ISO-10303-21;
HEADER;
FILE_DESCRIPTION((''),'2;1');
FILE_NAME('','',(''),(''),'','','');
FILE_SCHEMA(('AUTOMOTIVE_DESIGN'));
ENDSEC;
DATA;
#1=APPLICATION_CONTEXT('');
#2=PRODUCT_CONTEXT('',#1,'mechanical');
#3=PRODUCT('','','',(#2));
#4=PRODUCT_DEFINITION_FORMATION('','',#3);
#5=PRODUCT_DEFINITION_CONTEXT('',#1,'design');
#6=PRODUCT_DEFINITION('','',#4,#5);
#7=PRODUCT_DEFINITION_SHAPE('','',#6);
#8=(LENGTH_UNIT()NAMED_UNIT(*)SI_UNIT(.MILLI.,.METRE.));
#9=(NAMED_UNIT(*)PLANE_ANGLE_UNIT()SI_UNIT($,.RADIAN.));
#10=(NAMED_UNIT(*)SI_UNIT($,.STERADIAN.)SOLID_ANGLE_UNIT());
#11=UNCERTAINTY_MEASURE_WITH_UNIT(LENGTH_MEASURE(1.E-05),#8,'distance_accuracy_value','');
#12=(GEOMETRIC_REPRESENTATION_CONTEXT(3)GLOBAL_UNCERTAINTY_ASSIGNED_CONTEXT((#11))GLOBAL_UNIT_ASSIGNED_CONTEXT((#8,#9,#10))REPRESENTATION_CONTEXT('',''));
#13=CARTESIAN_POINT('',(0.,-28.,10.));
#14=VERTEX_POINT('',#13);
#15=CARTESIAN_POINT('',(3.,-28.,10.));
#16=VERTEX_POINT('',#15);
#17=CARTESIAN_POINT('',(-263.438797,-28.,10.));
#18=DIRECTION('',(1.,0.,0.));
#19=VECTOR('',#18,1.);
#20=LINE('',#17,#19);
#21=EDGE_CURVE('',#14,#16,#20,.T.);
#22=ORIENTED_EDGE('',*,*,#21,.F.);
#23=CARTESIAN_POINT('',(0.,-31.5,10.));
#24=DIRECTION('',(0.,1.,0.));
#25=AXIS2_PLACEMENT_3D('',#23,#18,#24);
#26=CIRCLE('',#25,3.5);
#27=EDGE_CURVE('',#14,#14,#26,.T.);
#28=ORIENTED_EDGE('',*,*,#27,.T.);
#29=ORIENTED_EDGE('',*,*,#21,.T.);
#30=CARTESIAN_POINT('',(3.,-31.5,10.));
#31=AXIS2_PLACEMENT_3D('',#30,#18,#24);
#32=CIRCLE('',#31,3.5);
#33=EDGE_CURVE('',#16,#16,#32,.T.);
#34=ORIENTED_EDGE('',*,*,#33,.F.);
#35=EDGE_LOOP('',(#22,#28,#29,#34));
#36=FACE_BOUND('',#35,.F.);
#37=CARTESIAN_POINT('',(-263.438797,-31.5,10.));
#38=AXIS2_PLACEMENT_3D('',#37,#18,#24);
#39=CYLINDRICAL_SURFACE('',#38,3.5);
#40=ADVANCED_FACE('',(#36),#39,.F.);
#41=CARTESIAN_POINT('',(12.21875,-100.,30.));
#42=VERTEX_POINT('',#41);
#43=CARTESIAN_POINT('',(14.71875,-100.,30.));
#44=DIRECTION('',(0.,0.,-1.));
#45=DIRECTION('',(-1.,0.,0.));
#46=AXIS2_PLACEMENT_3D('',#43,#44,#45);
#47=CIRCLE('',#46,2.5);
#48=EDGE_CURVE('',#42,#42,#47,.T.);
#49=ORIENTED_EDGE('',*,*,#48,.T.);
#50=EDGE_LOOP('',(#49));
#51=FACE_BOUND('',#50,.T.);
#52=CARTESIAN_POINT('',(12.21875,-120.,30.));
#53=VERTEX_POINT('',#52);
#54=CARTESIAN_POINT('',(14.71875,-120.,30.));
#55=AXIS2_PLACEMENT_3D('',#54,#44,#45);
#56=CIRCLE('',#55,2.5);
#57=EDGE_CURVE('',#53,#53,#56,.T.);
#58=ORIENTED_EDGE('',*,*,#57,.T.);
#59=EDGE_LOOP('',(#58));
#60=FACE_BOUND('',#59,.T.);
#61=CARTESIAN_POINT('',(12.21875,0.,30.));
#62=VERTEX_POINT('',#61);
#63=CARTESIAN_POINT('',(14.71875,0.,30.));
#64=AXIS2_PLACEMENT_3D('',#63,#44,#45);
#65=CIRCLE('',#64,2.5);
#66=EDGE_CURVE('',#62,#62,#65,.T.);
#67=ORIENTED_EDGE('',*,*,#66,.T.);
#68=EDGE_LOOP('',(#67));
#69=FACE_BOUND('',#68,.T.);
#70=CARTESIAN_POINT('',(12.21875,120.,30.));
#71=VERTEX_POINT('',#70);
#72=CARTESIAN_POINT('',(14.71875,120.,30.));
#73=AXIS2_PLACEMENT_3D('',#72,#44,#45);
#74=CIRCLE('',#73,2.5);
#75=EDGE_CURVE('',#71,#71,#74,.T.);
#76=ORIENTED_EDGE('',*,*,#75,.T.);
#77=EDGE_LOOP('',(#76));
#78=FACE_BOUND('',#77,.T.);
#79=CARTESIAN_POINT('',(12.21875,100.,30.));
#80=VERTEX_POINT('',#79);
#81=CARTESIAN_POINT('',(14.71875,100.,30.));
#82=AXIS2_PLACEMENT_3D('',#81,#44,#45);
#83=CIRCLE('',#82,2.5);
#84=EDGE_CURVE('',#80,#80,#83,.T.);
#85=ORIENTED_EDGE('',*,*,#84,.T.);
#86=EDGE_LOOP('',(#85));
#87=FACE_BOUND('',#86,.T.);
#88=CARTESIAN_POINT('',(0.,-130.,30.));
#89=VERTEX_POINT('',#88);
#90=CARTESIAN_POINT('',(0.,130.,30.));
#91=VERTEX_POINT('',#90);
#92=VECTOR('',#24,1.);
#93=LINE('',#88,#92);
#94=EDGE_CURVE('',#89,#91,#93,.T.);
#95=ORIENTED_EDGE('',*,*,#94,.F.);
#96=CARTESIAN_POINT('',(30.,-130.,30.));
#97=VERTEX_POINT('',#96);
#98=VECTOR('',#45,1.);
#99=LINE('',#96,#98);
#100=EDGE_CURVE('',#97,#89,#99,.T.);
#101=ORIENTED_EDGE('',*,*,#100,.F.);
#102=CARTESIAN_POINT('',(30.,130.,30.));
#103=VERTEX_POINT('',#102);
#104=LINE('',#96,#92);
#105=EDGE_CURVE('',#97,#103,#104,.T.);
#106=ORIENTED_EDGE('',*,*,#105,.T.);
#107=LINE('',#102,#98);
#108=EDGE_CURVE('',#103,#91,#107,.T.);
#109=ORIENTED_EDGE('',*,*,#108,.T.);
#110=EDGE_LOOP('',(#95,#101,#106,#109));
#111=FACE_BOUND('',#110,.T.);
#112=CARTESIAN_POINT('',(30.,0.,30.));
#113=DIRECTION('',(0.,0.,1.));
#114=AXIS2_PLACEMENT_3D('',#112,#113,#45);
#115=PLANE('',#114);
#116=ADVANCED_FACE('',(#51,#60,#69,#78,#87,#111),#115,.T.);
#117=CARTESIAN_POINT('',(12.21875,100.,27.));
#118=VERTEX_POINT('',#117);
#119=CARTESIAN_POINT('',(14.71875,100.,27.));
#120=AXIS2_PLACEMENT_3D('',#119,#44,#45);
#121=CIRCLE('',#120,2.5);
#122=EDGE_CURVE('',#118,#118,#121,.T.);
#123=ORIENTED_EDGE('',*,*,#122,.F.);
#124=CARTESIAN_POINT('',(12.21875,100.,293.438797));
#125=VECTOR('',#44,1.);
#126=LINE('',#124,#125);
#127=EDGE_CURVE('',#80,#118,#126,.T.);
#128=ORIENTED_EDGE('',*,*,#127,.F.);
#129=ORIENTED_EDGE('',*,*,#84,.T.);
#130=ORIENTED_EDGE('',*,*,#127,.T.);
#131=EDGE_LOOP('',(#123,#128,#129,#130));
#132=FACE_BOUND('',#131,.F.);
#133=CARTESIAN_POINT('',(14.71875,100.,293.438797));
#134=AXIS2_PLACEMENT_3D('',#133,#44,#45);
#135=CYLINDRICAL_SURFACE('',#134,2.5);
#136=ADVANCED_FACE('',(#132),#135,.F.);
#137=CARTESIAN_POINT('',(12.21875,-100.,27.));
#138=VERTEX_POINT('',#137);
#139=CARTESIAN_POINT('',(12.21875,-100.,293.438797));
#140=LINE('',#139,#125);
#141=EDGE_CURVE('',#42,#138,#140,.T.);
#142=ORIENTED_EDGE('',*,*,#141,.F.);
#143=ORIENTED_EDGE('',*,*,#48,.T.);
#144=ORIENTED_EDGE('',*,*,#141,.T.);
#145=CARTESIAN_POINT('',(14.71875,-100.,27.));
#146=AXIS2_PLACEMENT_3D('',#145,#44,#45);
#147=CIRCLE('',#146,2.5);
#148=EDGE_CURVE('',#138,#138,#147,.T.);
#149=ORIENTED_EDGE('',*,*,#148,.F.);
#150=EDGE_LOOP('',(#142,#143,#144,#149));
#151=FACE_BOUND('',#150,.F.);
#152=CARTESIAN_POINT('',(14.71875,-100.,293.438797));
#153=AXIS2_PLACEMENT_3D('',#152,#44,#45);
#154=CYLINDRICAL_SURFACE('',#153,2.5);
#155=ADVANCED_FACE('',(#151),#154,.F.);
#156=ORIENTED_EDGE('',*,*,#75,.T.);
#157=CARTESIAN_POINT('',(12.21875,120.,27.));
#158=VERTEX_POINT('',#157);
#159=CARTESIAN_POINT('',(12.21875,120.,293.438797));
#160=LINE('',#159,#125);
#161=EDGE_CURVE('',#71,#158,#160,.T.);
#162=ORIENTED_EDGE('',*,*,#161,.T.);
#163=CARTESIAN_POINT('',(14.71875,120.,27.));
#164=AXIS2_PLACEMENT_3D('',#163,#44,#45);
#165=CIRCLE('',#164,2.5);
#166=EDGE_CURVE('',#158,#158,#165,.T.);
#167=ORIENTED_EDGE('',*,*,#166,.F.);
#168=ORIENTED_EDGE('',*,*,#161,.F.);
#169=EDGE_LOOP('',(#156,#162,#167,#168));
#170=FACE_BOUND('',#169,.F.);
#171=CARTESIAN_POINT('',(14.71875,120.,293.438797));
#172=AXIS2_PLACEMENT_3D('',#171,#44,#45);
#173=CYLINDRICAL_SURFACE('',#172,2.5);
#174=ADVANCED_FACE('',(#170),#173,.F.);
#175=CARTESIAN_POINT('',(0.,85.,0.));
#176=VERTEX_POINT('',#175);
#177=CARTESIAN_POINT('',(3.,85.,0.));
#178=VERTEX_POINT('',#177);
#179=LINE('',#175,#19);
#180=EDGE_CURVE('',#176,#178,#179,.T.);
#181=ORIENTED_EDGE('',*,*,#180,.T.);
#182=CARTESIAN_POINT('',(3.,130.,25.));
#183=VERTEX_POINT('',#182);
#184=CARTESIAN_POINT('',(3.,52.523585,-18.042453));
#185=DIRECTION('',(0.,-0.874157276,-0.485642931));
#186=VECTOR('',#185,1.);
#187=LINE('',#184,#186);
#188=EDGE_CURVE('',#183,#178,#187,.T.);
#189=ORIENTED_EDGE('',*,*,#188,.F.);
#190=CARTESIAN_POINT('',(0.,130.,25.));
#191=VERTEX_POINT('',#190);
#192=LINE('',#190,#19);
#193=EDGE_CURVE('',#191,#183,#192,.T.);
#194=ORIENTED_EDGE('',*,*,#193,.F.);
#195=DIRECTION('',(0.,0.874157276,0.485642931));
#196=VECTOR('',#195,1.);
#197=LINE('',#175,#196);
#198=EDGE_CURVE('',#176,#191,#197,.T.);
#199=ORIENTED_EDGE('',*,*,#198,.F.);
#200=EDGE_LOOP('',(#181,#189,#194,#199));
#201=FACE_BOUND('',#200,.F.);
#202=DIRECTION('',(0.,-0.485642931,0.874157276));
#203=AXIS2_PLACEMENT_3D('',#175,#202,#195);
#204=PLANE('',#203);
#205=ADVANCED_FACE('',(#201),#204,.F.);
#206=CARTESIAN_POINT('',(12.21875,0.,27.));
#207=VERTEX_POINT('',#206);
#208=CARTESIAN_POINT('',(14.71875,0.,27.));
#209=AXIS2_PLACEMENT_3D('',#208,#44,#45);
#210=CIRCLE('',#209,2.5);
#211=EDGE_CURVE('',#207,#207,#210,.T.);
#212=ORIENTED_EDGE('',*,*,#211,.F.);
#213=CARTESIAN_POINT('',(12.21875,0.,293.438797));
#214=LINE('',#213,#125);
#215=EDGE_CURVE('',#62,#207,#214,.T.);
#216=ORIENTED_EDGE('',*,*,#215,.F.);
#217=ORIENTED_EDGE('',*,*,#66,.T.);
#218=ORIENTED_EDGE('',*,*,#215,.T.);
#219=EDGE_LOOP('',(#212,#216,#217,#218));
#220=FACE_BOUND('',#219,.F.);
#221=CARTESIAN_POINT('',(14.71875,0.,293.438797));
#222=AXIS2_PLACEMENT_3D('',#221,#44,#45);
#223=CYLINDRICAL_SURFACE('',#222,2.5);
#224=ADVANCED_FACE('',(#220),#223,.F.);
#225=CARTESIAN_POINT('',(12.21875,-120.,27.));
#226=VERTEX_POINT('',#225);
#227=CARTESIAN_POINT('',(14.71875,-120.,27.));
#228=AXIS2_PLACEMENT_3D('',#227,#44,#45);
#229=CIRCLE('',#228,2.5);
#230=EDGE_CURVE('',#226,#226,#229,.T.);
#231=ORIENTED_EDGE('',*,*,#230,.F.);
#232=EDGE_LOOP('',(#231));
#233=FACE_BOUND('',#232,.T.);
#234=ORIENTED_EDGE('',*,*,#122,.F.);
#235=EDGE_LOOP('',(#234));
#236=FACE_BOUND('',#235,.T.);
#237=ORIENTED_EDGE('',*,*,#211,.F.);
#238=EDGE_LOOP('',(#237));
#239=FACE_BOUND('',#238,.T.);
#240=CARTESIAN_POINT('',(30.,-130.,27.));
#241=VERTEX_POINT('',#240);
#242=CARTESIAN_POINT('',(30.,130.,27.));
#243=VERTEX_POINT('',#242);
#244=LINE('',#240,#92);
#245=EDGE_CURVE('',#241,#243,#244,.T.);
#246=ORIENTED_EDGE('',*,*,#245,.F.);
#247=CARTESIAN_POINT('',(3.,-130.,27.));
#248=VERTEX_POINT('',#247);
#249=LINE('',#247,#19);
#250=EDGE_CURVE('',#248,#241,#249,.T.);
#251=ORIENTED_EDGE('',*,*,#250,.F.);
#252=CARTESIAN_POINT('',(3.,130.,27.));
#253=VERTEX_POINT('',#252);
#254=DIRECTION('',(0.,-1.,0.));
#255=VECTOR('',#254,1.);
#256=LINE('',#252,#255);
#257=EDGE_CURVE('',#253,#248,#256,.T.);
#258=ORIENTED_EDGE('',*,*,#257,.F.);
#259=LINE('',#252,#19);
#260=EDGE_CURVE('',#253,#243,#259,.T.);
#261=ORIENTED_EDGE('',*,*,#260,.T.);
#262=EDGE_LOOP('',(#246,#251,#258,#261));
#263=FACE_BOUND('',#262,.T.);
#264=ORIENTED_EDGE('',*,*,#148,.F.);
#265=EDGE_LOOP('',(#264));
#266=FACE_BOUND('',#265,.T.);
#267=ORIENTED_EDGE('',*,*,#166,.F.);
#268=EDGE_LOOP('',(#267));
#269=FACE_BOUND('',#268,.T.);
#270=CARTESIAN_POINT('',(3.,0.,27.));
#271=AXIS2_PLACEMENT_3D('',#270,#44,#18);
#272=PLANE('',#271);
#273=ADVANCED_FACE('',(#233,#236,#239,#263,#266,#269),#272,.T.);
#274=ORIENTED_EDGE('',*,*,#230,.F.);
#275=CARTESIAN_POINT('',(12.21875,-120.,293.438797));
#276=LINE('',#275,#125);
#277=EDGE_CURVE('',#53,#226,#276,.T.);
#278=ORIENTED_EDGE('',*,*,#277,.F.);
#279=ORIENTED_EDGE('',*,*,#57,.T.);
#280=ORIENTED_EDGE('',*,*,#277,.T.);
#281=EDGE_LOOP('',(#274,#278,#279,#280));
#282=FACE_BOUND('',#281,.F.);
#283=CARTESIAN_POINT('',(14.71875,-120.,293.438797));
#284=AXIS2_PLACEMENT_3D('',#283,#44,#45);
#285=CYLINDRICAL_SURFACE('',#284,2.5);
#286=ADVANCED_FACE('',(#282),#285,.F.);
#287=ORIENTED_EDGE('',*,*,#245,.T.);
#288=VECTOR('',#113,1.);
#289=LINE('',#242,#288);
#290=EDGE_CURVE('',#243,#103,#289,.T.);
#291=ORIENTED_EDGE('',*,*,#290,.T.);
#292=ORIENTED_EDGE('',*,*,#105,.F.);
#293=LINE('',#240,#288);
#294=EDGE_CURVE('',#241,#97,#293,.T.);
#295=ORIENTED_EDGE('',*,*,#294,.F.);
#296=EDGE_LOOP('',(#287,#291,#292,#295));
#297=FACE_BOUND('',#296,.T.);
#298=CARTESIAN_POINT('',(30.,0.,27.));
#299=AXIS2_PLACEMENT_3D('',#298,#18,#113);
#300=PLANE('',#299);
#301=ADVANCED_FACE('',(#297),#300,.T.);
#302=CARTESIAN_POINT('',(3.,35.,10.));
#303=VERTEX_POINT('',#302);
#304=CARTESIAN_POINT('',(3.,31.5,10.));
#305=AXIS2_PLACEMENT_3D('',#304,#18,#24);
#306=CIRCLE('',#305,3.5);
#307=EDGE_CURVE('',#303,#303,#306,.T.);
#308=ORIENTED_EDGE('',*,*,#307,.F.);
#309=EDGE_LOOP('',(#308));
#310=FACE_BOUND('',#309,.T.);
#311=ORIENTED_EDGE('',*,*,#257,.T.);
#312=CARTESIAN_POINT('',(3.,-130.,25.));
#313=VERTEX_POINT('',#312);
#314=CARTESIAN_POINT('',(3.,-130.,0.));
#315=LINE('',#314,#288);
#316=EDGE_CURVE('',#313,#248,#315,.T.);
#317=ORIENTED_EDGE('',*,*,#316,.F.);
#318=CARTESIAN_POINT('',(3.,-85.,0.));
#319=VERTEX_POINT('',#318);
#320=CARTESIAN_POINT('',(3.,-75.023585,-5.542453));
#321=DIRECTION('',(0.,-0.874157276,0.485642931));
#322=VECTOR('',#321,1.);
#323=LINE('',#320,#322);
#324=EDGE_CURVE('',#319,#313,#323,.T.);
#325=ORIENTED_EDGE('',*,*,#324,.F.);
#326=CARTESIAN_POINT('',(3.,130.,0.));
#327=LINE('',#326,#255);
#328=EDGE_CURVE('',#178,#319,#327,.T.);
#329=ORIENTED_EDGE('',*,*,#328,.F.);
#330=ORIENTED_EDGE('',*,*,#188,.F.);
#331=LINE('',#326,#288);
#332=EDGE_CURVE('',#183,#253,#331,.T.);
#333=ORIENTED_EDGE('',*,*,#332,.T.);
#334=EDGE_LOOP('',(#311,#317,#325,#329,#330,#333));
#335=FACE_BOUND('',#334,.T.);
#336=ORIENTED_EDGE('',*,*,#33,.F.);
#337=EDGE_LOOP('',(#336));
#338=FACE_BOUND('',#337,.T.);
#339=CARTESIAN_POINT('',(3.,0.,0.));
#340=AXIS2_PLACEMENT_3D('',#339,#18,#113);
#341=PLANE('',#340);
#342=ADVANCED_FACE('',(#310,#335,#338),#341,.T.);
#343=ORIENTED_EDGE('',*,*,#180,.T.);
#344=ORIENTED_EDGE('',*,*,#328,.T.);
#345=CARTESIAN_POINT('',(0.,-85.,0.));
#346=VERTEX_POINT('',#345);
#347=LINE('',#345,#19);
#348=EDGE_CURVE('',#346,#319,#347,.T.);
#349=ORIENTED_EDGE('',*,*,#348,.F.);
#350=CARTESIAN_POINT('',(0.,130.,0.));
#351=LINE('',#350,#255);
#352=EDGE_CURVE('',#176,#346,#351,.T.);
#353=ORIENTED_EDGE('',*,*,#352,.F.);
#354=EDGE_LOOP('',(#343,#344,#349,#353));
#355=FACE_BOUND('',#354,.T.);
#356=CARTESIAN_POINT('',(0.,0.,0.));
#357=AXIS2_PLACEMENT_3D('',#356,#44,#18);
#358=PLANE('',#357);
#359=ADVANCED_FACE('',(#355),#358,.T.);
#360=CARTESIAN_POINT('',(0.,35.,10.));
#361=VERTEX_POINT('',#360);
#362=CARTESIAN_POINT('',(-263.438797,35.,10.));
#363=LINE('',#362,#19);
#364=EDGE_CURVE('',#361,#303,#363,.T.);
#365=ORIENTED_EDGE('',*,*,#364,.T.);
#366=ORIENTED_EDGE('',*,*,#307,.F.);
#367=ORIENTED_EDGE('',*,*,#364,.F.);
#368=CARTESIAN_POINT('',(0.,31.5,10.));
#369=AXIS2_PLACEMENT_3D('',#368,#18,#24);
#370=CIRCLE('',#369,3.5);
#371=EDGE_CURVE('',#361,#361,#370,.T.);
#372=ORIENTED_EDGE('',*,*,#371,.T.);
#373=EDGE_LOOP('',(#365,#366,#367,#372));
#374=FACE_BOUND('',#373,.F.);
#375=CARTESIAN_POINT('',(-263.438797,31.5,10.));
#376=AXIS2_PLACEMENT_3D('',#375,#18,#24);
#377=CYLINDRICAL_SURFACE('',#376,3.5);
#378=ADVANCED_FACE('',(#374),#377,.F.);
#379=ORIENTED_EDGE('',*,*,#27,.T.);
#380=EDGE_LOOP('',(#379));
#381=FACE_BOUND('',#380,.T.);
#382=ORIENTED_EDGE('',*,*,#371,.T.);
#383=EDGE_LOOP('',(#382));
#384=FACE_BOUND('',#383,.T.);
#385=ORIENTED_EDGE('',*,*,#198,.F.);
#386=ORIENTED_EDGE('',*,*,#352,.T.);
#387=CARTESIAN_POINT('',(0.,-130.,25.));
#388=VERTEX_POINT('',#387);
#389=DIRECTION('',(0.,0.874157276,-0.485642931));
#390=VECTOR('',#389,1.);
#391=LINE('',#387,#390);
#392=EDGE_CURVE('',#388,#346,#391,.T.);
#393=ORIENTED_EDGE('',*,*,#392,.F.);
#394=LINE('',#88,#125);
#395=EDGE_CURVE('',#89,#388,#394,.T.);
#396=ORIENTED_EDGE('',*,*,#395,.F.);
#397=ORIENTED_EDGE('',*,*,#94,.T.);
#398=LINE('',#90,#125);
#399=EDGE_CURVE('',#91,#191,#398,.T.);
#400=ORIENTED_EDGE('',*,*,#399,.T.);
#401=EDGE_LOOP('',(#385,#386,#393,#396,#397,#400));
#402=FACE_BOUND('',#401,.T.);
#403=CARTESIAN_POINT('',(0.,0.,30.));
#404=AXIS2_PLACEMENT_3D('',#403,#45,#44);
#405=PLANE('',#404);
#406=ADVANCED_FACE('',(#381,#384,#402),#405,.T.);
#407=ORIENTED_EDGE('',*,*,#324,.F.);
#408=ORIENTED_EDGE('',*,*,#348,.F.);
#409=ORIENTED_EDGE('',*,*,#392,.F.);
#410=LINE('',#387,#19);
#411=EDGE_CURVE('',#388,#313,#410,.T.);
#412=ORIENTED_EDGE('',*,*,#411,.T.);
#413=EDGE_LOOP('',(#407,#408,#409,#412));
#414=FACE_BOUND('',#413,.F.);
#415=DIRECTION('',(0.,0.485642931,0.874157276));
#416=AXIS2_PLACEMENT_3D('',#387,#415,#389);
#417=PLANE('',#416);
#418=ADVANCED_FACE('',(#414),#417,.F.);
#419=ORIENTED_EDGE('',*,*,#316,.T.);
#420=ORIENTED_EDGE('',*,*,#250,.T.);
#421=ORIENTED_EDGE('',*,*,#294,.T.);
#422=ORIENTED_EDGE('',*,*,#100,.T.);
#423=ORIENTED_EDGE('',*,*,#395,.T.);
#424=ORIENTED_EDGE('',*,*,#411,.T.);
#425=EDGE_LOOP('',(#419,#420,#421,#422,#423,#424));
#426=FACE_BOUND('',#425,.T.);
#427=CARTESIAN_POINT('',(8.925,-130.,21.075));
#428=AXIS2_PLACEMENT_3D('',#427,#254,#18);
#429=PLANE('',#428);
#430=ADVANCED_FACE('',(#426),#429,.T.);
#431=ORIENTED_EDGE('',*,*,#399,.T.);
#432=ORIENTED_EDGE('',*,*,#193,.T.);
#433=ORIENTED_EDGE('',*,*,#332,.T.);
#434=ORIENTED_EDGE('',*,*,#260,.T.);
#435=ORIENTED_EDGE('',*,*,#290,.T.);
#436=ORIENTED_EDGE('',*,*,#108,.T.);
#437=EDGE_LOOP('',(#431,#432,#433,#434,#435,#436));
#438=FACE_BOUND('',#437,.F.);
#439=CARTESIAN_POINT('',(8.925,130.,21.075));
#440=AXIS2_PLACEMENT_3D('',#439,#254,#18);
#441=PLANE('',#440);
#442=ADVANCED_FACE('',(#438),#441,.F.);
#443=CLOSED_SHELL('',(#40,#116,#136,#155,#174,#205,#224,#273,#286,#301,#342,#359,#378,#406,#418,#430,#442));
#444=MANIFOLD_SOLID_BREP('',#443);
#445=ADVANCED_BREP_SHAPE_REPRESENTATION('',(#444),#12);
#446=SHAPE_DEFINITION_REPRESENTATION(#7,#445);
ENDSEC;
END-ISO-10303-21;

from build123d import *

# Parameters (mm, degrees)
F1_DEPTH = 130
F3_D     = 7
F5_D     = 5
F7_DEPTH = 25


# Not quite as in the source:
# - a feature names something its author has since deleted; it is built from what else it names


with BuildPart() as f1:
    # F0 (on Front) → F1 (new body, symmetric)
    with BuildSketch(Plane.XZ):
        Polygon((0, 30), (0, 0), (3, 0), (3, 27), (30, 27), (30, 30), align=None)
    extrude(amount=F1_DEPTH, both=True)

    # F3 (through all)
    with Locations(Plane(origin=(0, 0, 0), x_dir=(0, -1, 0), z_dir=(-1, 0, 0))):
        with Locations((-31.5, 10), (31.5, 10)):
            Hole(F3_D / 2)

    # F5 (through all)
    with Locations(Plane.XY.offset(30)):
        with Locations((14.7187495604, 0), (14.7187495604, -100), (14.7187495604, 100), (14.7187495604, -120), (14.7187495604, 120)):
            Hole(F5_D / 2)

    # F6 (on face) → F7 (cut)
    with BuildSketch(Plane(origin=(0, 0, 0), x_dir=(0, -1, 0), z_dir=(-1, 0, 0))):
        Polygon((-85, 0), (-130, 25), (-130, 0), align=None)
        Polygon((130, 0), (130, 25), (85, 0), align=None)
    extrude(amount=-F7_DEPTH, mode=Mode.SUBTRACT)


solid = f1.part
